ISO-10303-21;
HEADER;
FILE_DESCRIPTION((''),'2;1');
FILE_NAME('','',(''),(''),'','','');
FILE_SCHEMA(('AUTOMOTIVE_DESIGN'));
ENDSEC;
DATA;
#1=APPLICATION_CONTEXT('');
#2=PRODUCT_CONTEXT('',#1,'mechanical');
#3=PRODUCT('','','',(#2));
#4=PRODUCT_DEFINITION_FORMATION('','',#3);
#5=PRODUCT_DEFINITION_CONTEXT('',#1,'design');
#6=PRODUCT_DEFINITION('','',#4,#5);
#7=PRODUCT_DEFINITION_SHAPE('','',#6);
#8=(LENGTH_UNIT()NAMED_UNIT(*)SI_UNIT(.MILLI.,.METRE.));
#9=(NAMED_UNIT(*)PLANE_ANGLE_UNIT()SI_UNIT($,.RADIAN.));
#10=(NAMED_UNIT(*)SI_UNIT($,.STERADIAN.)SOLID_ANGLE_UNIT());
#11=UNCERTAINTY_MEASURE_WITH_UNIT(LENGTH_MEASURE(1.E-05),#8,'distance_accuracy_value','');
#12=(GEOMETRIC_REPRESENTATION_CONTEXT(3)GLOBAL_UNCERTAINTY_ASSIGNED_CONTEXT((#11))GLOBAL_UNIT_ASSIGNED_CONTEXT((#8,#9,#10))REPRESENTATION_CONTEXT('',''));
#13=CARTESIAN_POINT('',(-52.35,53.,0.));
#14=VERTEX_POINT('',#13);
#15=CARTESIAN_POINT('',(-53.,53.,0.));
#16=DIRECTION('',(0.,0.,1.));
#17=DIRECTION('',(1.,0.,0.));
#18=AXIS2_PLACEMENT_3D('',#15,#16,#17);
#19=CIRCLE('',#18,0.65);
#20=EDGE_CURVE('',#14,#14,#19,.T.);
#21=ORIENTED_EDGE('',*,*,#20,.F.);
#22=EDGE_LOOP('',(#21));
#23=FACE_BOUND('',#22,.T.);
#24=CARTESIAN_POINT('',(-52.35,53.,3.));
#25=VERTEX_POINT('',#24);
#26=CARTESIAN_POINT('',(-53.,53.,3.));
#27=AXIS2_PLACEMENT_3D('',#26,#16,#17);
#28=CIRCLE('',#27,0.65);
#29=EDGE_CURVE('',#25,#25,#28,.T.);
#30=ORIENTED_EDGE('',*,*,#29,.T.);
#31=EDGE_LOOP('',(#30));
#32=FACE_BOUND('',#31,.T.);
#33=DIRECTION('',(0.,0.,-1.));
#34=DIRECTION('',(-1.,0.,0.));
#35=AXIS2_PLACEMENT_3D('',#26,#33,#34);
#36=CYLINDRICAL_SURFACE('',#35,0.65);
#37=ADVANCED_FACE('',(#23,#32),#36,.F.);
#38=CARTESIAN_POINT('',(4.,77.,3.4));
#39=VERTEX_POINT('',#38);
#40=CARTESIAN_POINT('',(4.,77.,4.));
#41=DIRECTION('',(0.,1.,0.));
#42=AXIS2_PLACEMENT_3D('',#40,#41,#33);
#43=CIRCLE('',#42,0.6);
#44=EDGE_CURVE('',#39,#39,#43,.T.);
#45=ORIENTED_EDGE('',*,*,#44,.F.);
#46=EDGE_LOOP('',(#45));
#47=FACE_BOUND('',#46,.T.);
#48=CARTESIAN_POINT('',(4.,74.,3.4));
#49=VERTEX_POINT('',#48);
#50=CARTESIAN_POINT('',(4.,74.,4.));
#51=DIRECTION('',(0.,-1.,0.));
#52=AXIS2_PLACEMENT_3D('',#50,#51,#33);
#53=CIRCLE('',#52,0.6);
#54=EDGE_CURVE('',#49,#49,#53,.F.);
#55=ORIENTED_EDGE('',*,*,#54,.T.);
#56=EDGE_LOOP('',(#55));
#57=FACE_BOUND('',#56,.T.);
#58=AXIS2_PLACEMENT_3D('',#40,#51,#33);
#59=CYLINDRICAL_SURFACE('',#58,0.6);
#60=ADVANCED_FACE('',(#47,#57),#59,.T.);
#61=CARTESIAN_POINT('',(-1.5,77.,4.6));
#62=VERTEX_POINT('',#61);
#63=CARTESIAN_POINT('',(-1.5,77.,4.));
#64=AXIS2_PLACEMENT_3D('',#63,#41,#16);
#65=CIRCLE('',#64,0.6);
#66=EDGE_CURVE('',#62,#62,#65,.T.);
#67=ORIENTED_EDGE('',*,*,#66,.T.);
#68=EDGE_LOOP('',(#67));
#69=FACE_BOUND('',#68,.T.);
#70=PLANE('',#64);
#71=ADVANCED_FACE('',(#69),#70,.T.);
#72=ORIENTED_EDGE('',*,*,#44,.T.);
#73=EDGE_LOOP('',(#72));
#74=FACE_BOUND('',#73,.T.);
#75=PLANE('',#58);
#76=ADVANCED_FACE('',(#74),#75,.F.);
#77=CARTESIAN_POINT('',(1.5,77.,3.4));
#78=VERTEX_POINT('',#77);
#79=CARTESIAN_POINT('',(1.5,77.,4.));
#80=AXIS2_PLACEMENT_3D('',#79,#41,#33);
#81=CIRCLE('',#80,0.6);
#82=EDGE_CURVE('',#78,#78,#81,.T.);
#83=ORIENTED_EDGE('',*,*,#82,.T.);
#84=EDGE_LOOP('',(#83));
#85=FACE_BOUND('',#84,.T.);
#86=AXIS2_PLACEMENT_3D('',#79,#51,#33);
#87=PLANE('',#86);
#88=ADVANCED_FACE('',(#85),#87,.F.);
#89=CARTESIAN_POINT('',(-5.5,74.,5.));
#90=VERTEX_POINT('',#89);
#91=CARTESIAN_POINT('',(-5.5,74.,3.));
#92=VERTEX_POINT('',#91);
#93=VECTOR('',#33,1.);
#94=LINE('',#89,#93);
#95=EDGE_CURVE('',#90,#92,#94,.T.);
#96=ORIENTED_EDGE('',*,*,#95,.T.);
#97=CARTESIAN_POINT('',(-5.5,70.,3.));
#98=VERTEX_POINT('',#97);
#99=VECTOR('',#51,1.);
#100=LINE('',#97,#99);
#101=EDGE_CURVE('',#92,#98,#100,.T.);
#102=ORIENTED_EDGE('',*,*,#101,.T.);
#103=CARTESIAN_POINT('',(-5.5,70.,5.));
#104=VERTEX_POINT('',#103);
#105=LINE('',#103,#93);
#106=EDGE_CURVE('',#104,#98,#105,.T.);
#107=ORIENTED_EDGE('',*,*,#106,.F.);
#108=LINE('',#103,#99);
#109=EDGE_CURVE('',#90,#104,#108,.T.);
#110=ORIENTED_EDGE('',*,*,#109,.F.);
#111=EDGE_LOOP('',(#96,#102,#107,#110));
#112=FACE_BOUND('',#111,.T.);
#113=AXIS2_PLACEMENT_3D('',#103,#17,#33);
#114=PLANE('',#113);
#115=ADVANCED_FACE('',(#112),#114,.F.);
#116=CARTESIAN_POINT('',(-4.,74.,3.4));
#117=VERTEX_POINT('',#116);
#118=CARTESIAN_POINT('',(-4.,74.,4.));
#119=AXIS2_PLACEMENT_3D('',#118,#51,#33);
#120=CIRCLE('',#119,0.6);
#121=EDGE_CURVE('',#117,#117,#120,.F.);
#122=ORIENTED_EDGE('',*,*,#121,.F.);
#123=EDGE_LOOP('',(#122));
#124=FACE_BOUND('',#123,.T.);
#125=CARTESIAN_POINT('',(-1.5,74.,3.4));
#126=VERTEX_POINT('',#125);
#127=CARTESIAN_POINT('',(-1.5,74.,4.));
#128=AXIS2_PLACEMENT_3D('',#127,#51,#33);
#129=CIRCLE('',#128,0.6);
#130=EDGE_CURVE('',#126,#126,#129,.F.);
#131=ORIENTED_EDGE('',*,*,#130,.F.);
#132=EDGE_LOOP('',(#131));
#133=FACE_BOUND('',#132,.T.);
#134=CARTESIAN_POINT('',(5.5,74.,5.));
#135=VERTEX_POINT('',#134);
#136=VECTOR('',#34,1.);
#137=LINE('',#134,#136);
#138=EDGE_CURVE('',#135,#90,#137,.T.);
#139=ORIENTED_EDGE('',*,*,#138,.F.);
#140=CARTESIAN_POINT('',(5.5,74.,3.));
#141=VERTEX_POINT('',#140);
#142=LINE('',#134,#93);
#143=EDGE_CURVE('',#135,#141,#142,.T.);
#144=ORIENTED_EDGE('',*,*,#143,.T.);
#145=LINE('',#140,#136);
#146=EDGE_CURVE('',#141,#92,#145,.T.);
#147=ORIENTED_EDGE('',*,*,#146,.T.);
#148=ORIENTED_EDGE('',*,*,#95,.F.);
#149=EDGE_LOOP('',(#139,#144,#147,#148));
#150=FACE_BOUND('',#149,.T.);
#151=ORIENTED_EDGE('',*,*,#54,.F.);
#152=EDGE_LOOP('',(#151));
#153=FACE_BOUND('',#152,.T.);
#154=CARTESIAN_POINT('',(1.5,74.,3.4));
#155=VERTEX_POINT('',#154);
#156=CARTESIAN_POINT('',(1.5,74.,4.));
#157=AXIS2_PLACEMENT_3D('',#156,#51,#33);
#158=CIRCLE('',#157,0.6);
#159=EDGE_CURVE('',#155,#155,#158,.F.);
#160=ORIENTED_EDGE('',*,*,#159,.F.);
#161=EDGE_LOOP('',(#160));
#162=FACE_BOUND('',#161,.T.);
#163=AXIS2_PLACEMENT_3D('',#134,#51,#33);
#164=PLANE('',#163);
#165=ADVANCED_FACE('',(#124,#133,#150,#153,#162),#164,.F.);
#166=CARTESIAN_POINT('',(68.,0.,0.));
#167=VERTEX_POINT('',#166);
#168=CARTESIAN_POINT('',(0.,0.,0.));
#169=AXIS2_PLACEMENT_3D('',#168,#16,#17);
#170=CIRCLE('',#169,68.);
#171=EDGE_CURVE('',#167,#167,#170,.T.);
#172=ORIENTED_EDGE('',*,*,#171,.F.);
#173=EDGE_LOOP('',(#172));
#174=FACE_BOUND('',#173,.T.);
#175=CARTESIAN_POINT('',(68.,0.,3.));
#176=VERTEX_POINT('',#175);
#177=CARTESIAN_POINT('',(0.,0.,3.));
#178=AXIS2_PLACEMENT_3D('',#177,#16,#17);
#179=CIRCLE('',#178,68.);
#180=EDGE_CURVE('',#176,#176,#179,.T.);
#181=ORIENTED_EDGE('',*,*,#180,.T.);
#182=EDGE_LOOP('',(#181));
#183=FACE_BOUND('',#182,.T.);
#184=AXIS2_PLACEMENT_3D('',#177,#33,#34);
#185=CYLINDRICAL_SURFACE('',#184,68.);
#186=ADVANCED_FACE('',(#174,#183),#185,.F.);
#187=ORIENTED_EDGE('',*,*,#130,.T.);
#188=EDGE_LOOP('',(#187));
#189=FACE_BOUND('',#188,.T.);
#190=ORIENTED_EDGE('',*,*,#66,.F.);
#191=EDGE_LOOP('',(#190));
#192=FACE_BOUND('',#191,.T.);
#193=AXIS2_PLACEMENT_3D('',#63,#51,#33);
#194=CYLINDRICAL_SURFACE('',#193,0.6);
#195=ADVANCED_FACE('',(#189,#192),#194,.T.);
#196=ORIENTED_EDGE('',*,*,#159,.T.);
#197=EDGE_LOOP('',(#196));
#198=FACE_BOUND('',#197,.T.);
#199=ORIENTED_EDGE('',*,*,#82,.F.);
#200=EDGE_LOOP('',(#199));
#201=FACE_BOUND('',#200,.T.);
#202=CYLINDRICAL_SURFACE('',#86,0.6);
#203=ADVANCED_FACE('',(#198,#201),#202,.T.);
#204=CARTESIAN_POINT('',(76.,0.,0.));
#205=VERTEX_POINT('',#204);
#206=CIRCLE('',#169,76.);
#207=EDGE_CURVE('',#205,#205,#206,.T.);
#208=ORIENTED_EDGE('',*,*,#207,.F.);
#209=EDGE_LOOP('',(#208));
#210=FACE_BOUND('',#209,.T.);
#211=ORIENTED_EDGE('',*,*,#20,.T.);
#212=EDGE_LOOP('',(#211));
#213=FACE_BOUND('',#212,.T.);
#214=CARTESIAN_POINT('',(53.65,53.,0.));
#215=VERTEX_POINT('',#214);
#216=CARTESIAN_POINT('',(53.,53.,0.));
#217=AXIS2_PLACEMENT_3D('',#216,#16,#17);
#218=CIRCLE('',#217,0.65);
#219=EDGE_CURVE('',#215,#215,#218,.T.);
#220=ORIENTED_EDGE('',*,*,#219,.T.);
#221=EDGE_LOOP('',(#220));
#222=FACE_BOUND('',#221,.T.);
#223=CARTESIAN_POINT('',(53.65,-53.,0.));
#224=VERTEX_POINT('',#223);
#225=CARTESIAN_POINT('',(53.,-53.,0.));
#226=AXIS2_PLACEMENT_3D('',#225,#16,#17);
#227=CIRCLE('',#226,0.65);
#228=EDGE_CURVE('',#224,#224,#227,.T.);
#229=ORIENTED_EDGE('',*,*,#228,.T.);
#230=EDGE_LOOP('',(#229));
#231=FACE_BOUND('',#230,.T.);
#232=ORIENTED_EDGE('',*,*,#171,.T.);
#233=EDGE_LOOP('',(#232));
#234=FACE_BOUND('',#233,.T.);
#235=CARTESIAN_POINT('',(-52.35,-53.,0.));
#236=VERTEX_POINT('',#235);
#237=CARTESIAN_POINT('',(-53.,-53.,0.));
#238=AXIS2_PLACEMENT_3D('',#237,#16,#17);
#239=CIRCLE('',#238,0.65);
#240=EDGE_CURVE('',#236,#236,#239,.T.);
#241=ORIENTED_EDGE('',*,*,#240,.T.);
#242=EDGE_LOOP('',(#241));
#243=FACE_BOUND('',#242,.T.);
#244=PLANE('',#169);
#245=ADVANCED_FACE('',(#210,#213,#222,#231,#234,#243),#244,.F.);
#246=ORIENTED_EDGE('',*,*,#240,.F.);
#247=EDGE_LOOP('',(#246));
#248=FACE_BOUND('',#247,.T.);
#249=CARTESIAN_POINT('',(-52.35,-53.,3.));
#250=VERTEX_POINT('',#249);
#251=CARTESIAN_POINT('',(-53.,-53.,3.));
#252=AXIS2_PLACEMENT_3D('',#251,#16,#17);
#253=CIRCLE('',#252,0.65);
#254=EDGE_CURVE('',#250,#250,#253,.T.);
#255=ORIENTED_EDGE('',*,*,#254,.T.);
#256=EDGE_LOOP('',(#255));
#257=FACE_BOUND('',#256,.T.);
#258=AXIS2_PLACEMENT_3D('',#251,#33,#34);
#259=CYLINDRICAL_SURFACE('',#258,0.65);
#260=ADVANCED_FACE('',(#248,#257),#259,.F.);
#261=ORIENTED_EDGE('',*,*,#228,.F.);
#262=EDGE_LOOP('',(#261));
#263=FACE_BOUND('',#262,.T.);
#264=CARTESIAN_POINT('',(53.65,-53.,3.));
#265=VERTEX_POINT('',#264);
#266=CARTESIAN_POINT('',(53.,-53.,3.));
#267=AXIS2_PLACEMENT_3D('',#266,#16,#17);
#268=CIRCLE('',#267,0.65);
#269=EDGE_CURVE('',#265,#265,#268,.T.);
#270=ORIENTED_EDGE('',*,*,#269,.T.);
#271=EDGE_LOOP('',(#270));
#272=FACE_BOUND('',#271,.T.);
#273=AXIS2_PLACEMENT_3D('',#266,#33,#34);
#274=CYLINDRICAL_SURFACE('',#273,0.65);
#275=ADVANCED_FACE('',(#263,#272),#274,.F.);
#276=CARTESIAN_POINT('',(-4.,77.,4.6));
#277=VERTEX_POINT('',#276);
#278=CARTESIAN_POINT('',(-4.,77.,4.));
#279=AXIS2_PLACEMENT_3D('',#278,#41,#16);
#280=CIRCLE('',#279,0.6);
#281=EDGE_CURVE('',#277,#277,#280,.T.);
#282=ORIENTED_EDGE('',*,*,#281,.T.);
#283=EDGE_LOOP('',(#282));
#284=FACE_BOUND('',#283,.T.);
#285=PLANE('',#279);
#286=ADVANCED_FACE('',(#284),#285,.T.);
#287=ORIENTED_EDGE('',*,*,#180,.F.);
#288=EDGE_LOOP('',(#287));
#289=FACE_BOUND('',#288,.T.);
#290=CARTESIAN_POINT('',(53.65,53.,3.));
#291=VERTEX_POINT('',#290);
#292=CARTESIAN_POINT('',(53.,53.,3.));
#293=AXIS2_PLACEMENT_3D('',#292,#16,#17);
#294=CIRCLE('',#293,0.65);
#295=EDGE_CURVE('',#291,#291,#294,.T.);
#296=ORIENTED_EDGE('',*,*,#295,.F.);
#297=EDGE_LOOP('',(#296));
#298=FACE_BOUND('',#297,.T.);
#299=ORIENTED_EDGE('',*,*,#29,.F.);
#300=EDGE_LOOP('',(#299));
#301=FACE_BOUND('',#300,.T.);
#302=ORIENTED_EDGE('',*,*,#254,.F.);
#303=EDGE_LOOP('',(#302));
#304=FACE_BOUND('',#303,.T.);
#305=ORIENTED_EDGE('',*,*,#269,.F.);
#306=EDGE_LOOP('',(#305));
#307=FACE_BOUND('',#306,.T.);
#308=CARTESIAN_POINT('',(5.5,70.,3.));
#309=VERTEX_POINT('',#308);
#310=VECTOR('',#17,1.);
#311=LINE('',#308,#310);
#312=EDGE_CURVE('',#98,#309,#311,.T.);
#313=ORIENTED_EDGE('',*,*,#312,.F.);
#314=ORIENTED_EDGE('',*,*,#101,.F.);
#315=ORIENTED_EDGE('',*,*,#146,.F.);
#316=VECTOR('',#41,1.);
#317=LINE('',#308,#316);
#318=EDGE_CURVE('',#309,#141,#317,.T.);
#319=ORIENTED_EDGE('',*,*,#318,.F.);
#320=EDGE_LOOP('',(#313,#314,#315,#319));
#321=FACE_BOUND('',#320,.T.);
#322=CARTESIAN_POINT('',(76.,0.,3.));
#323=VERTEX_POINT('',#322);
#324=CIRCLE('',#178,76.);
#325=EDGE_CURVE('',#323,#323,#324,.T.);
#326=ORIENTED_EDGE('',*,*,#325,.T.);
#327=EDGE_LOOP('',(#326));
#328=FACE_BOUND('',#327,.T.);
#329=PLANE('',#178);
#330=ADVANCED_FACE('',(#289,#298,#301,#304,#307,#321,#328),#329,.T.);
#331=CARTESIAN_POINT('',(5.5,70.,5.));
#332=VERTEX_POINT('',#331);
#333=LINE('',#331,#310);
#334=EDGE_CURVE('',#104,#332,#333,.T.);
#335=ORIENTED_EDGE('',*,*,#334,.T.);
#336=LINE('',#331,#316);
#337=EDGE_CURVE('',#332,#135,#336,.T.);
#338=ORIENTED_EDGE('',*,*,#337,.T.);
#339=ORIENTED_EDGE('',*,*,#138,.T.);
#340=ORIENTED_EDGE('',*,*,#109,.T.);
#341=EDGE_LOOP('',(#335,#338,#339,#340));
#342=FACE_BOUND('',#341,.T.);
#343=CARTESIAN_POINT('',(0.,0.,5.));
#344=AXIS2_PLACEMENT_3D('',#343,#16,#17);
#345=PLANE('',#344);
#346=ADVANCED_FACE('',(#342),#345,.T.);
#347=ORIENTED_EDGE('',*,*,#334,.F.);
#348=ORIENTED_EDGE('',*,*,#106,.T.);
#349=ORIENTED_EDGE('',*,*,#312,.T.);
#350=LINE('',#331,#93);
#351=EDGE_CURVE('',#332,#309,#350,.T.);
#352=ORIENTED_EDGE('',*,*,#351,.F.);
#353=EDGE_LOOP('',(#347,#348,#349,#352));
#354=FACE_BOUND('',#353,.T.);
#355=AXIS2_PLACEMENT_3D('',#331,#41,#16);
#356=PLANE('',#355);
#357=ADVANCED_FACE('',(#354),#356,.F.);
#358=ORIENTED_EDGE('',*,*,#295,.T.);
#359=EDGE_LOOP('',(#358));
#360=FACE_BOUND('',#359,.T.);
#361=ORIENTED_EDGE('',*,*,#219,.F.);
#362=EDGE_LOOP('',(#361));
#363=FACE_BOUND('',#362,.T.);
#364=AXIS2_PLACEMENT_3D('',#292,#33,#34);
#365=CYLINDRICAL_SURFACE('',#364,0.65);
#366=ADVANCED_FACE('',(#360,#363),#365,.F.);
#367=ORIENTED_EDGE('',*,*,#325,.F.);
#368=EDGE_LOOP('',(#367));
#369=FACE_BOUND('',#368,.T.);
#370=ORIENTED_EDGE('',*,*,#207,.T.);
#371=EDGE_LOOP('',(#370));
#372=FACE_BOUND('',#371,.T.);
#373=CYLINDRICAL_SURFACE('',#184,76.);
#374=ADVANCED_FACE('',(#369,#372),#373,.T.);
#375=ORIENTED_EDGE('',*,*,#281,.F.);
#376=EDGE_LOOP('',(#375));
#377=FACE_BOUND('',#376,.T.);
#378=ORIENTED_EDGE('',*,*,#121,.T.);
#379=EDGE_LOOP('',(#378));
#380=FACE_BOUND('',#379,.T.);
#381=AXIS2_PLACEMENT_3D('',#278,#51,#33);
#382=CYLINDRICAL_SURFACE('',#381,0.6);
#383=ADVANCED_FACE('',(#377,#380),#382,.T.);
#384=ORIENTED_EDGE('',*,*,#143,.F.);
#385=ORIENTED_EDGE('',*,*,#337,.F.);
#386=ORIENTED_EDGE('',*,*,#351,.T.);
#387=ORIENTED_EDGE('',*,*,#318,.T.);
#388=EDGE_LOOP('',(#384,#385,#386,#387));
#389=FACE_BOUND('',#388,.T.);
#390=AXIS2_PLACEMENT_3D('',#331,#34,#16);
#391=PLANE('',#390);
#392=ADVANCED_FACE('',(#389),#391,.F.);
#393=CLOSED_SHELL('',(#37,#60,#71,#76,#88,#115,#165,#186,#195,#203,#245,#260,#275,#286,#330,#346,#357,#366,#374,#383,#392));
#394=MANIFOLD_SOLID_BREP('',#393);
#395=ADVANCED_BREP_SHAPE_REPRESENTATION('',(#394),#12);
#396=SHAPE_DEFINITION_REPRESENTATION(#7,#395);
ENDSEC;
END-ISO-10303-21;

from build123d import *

# Parameters (mm, degrees)
EXTRUDE_1_OUTLINE_R   = 76
EXTRUDE_1_OUTLINE_R_2 = 0.65
EXTRUDE_1_OUTLINE_R_3 = 68
EXTRUDE_1_DEPTH       = 3
SKETCH_2_W            = 11
SKETCH_2_H            = 4
EXTRUDE_2_DEPTH       = 2
SKETCH_3_R            = 0.6
EXTRUDE_3_DEPTH       = 3


# Read off the part's stored shape, not the designer's step: 凸台-拉伸1
with BuildPart() as part:
    # 凸台-拉伸1 outline → 凸台-拉伸1 (new body)
    with BuildSketch(Plane.XY):
        Circle(EXTRUDE_1_OUTLINE_R)
        with Locations((-53, -53)):
            Circle(EXTRUDE_1_OUTLINE_R_2, mode=Mode.SUBTRACT)
        with Locations((53, -53)):
            Circle(EXTRUDE_1_OUTLINE_R_2, mode=Mode.SUBTRACT)
        with Locations((-53, 53)):
            Circle(EXTRUDE_1_OUTLINE_R_2, mode=Mode.SUBTRACT)
        Circle(EXTRUDE_1_OUTLINE_R_3, mode=Mode.SUBTRACT)
        with Locations((53, 53)):
            Circle(EXTRUDE_1_OUTLINE_R_2, mode=Mode.SUBTRACT)
    extrude(amount=EXTRUDE_1_DEPTH)

    # 草图2 → 凸台-拉伸2 (add)
    with BuildSketch(Plane.XY.offset(3)):
        with Locations((0, 72)):
            Rectangle(SKETCH_2_W, SKETCH_2_H)
    extrude(amount=EXTRUDE_2_DEPTH)

    # 草图3 → 凸台-拉伸3 (add)
    with BuildSketch(Plane(origin=(0, 74, 0), x_dir=(1, 0, 0), z_dir=(0, 1, 0))):
        with Locations(Location((-1.5, -4, 0), (0, 0, 90))):
            Circle(SKETCH_3_R)
        with Locations(Location((1.5, -4, 0), (0, 0, 90))):
            Circle(SKETCH_3_R)
        with Locations(Location((-4, -4, 0), (0, 0, 90))):
            Circle(SKETCH_3_R)
        with Locations(Location((4, -4, 0), (0, 0, 90))):
            Circle(SKETCH_3_R)
    extrude(amount=EXTRUDE_3_DEPTH)


solid = part.part
